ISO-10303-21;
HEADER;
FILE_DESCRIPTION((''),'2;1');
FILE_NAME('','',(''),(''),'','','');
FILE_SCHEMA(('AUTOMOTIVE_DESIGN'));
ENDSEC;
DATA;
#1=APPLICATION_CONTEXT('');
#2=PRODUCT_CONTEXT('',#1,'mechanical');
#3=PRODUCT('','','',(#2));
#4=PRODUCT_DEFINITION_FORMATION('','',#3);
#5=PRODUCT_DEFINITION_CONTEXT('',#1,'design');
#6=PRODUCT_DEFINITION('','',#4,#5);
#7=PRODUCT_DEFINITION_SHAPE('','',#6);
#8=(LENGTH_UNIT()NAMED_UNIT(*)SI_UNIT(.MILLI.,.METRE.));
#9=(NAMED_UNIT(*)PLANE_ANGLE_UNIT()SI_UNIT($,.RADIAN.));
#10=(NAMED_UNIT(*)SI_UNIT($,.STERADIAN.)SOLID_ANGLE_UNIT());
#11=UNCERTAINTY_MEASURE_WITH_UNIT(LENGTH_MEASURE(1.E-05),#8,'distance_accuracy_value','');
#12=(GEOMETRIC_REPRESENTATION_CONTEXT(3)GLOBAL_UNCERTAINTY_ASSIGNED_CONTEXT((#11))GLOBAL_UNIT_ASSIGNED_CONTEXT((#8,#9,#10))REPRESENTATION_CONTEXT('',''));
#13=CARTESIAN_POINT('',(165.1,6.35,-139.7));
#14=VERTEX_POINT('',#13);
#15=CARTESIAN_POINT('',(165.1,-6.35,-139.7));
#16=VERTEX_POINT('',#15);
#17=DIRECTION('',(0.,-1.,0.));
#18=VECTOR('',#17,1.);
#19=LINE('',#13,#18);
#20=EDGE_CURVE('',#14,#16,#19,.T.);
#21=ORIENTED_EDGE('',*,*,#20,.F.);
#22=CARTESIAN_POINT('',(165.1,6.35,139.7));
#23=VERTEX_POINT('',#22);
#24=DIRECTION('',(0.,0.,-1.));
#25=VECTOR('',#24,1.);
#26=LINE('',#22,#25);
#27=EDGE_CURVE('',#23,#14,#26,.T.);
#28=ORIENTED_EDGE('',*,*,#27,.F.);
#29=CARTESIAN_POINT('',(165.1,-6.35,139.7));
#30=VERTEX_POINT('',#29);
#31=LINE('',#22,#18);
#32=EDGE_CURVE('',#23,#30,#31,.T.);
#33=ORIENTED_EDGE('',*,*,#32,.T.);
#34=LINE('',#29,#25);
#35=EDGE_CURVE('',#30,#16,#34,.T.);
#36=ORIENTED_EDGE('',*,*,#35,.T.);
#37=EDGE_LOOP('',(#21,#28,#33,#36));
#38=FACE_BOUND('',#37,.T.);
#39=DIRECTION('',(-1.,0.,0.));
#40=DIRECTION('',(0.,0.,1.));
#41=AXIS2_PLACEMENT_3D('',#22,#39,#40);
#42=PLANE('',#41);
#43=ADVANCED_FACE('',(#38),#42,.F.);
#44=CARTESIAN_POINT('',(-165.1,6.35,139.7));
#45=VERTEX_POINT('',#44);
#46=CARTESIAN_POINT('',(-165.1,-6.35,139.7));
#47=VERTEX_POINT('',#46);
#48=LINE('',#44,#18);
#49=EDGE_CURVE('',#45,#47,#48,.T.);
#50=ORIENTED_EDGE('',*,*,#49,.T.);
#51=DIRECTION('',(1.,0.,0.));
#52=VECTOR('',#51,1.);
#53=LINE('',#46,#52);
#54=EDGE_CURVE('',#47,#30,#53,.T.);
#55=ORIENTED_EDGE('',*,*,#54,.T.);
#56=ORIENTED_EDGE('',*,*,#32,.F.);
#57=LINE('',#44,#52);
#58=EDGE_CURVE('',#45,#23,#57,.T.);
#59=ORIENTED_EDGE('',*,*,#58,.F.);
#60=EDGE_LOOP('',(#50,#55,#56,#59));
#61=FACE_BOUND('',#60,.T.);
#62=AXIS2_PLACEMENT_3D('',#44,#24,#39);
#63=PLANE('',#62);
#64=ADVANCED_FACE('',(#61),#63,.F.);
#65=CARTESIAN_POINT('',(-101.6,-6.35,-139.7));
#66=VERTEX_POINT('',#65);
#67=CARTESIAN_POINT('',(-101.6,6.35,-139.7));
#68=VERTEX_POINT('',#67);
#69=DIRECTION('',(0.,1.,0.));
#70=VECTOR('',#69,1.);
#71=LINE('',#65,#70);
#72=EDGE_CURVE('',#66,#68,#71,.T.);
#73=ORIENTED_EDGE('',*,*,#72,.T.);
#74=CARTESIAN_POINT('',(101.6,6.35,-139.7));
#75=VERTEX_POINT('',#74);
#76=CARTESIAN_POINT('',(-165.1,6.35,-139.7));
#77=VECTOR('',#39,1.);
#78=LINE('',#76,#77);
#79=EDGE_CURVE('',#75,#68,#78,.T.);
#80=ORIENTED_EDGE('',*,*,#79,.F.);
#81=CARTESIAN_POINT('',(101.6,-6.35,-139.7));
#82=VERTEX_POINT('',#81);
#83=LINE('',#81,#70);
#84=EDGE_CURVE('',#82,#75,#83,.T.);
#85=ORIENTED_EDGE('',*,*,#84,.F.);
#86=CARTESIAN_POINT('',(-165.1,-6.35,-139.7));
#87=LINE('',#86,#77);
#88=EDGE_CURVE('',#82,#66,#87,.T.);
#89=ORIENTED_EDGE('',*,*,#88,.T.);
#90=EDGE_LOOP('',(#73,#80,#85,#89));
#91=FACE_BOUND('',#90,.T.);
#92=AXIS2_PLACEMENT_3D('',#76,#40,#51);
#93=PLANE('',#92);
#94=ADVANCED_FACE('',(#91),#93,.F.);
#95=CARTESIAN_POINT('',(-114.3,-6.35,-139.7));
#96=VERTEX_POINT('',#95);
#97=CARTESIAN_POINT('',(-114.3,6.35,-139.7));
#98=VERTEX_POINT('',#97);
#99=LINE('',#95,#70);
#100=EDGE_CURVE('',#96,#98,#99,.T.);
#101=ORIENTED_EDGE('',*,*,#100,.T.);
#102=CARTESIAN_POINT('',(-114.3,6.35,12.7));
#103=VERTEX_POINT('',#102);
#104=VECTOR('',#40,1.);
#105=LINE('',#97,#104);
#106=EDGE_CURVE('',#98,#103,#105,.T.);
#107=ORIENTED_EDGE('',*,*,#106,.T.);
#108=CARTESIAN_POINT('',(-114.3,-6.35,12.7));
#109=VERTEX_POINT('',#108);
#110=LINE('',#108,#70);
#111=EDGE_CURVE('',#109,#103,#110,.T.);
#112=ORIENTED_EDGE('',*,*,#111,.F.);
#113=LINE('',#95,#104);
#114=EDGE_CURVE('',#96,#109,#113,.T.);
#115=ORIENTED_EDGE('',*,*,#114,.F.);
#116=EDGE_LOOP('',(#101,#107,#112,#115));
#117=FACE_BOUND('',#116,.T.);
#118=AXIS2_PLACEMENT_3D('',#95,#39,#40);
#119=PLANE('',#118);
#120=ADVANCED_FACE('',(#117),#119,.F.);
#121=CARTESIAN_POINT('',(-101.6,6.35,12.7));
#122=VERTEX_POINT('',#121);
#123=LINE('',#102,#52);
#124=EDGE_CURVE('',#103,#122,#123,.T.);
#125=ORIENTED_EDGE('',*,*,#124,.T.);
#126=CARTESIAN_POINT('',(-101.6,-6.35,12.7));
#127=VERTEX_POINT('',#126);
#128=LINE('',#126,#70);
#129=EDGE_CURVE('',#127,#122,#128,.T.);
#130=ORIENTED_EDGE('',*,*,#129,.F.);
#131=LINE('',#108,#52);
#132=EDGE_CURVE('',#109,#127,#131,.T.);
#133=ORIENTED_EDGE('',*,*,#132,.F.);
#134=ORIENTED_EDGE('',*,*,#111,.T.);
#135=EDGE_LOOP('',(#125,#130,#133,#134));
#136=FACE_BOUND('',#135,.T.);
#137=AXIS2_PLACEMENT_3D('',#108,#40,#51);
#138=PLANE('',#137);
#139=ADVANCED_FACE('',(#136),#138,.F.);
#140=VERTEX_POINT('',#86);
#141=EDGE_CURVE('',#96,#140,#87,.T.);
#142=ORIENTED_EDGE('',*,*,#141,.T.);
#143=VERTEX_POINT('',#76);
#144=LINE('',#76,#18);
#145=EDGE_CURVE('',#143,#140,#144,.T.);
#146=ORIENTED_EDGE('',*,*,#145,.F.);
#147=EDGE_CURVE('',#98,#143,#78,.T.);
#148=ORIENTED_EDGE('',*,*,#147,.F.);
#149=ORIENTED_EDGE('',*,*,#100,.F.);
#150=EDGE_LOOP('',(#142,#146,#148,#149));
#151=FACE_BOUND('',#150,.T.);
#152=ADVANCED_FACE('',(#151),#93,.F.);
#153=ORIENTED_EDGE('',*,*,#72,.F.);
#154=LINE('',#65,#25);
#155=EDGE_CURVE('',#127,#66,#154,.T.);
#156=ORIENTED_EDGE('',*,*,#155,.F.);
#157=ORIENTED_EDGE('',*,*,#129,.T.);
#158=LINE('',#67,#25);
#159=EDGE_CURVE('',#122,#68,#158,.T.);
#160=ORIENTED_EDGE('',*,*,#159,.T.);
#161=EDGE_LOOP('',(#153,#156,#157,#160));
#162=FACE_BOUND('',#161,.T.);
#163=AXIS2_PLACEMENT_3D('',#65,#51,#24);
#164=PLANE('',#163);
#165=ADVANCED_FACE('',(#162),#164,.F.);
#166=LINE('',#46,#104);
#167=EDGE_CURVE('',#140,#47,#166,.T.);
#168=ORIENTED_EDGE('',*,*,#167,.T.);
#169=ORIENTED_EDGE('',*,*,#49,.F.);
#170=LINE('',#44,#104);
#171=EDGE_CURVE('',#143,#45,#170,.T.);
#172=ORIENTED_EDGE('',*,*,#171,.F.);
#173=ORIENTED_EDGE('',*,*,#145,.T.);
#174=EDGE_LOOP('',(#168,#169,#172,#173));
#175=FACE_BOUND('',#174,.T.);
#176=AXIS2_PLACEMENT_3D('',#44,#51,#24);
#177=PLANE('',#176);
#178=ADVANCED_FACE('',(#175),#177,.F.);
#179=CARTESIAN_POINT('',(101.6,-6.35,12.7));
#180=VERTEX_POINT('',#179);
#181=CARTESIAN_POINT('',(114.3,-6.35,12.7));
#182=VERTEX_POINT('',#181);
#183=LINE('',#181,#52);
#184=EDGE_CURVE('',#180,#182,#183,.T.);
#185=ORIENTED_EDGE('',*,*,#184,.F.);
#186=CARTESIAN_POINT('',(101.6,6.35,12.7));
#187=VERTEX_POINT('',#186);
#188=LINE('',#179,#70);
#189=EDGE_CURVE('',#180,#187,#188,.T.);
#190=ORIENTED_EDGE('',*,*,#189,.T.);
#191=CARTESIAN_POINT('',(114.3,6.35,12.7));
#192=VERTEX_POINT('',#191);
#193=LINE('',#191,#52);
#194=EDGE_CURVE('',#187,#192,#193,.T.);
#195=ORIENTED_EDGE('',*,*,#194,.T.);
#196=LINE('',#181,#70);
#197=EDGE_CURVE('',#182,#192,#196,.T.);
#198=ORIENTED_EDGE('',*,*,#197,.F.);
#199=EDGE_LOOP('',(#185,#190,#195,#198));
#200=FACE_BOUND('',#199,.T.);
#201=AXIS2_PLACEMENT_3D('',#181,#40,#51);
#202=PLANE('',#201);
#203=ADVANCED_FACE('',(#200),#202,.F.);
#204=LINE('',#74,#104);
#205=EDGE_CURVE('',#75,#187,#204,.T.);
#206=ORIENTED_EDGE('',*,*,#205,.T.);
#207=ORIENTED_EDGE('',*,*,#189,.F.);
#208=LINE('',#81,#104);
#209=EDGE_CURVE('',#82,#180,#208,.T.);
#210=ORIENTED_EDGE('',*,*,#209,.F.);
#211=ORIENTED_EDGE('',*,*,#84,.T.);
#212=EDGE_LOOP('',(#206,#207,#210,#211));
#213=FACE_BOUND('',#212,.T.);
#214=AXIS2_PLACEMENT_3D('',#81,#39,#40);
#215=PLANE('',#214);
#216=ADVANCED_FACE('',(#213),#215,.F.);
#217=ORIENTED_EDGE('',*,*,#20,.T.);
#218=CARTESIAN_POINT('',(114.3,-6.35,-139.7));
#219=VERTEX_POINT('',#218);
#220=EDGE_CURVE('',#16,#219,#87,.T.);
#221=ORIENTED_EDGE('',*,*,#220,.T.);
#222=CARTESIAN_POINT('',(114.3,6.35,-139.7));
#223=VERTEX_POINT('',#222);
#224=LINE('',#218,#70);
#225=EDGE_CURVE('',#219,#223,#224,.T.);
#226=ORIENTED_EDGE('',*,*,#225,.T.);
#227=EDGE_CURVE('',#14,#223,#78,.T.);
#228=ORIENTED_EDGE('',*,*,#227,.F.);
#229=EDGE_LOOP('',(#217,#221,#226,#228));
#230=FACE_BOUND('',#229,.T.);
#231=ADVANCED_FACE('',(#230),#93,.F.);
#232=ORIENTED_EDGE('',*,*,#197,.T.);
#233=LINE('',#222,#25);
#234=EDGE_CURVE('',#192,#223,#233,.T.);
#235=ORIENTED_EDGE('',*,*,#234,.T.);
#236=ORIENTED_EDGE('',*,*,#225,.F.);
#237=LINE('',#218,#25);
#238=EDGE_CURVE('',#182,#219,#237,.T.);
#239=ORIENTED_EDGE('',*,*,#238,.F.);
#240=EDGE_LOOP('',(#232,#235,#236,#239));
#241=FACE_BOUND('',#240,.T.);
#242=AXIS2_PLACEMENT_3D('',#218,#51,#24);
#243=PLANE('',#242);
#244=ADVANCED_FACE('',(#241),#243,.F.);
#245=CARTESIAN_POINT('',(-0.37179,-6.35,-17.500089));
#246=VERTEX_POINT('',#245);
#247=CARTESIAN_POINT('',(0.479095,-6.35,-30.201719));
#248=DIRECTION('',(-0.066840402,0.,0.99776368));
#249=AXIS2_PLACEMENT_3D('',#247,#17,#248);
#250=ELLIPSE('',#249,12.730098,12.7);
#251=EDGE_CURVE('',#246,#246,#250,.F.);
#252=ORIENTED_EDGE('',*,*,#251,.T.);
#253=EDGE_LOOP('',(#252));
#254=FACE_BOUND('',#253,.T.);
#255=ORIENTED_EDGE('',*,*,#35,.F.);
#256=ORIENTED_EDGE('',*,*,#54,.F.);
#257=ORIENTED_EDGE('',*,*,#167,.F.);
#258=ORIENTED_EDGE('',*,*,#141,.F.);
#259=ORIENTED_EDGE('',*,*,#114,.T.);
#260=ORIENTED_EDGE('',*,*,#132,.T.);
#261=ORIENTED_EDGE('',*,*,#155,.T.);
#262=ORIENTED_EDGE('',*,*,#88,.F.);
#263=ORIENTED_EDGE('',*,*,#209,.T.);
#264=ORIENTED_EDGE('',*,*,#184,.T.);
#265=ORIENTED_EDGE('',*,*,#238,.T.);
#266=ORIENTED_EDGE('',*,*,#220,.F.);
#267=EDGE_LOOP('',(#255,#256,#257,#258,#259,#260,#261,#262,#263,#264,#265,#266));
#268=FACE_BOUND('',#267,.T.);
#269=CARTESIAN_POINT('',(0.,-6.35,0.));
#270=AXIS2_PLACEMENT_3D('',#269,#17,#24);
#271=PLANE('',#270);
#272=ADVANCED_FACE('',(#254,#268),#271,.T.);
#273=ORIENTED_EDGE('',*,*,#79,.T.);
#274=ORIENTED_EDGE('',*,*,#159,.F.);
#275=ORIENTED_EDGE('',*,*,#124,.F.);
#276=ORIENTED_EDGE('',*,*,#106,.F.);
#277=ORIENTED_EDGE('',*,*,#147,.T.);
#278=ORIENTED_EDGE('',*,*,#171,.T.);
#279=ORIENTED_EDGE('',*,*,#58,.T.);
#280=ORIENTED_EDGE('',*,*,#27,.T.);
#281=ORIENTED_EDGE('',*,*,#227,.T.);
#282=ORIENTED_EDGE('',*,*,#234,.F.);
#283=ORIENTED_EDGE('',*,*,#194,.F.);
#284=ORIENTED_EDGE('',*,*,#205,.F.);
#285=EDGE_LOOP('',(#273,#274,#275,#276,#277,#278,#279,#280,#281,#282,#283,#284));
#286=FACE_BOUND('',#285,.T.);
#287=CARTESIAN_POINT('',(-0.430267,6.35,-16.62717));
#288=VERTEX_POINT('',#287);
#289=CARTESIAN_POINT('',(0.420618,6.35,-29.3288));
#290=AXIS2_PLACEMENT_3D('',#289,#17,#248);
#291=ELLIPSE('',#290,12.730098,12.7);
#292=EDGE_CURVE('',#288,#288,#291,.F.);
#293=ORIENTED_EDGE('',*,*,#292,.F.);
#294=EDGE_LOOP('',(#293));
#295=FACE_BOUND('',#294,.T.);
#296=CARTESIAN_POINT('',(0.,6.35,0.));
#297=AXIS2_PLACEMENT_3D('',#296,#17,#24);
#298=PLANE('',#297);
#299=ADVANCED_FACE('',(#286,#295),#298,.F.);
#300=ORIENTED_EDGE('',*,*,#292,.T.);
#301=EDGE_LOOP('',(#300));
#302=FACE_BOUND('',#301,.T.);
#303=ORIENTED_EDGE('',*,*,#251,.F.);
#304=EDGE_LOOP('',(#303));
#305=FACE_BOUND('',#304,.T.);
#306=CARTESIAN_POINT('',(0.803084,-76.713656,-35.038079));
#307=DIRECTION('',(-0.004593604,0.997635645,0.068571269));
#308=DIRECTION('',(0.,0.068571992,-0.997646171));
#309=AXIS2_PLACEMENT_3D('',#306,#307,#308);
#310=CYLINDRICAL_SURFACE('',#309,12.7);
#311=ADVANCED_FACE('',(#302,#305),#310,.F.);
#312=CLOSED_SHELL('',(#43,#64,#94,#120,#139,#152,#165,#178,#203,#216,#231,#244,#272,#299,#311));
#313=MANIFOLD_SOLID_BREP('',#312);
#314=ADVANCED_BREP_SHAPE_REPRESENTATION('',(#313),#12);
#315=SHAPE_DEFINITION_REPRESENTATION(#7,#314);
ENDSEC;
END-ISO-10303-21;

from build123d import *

# Parameters (mm, degrees)
SKETCH1_W           = 330.2
SKETCH1_H           = 279.4
BOSS_EXTRUDE1_DEPTH = 6.35
SKETCH2_W           = 12.7
SKETCH2_H           = 152.4
CUT_EXTRUDE1_DEPTH  = 217.645770787
CAVITY1_START       = -5.196816792
CAVITY1_OUTLINE_R   = 12.7
CAVITY1_DEPTH       = 14.479849691


# Read off the part's stored shape, not the designer's step: Cavity1
with BuildPart() as part:
    # Sketch1 → Boss-Extrude1 (new, symmetric)
    with BuildSketch(Plane(origin=(0, 0, 0), x_dir=(1, 0, 0), z_dir=(0, 1, 0))):
        Rectangle(SKETCH1_W, SKETCH1_H)
    extrude(amount=BOSS_EXTRUDE1_DEPTH, both=True)

    # Sketch2 → Cut-Extrude1 (cut, through all)
    with BuildSketch(Plane(origin=(0, 6.35, 0), x_dir=(1, 0, 0), z_dir=(0, 1, 0))):
        with Locations((-107.95, 63.5)):
            Rectangle(SKETCH2_W, SKETCH2_H)
        with Locations((107.95, 63.5)):
            Rectangle(SKETCH2_W, SKETCH2_H)
    extrude(amount=-CUT_EXTRUDE1_DEPTH, mode=Mode.SUBTRACT)

    # Cavity1 outline → Cavity1 (cut)
    with BuildSketch(Plane(origin=(0, 0, 0), x_dir=(0.9999894493458413, 0.00458279136333027, 0.00031499257366167274), z_dir=(0.004593603922986451, -0.9976356448477001, -0.06857126900030612)).offset(CAVITY1_START)):
        with Locations((0.440476058, -29.695196787)):
            Circle(CAVITY1_OUTLINE_R)
    extrude(amount=CAVITY1_DEPTH, mode=Mode.SUBTRACT)


solid = part.part
